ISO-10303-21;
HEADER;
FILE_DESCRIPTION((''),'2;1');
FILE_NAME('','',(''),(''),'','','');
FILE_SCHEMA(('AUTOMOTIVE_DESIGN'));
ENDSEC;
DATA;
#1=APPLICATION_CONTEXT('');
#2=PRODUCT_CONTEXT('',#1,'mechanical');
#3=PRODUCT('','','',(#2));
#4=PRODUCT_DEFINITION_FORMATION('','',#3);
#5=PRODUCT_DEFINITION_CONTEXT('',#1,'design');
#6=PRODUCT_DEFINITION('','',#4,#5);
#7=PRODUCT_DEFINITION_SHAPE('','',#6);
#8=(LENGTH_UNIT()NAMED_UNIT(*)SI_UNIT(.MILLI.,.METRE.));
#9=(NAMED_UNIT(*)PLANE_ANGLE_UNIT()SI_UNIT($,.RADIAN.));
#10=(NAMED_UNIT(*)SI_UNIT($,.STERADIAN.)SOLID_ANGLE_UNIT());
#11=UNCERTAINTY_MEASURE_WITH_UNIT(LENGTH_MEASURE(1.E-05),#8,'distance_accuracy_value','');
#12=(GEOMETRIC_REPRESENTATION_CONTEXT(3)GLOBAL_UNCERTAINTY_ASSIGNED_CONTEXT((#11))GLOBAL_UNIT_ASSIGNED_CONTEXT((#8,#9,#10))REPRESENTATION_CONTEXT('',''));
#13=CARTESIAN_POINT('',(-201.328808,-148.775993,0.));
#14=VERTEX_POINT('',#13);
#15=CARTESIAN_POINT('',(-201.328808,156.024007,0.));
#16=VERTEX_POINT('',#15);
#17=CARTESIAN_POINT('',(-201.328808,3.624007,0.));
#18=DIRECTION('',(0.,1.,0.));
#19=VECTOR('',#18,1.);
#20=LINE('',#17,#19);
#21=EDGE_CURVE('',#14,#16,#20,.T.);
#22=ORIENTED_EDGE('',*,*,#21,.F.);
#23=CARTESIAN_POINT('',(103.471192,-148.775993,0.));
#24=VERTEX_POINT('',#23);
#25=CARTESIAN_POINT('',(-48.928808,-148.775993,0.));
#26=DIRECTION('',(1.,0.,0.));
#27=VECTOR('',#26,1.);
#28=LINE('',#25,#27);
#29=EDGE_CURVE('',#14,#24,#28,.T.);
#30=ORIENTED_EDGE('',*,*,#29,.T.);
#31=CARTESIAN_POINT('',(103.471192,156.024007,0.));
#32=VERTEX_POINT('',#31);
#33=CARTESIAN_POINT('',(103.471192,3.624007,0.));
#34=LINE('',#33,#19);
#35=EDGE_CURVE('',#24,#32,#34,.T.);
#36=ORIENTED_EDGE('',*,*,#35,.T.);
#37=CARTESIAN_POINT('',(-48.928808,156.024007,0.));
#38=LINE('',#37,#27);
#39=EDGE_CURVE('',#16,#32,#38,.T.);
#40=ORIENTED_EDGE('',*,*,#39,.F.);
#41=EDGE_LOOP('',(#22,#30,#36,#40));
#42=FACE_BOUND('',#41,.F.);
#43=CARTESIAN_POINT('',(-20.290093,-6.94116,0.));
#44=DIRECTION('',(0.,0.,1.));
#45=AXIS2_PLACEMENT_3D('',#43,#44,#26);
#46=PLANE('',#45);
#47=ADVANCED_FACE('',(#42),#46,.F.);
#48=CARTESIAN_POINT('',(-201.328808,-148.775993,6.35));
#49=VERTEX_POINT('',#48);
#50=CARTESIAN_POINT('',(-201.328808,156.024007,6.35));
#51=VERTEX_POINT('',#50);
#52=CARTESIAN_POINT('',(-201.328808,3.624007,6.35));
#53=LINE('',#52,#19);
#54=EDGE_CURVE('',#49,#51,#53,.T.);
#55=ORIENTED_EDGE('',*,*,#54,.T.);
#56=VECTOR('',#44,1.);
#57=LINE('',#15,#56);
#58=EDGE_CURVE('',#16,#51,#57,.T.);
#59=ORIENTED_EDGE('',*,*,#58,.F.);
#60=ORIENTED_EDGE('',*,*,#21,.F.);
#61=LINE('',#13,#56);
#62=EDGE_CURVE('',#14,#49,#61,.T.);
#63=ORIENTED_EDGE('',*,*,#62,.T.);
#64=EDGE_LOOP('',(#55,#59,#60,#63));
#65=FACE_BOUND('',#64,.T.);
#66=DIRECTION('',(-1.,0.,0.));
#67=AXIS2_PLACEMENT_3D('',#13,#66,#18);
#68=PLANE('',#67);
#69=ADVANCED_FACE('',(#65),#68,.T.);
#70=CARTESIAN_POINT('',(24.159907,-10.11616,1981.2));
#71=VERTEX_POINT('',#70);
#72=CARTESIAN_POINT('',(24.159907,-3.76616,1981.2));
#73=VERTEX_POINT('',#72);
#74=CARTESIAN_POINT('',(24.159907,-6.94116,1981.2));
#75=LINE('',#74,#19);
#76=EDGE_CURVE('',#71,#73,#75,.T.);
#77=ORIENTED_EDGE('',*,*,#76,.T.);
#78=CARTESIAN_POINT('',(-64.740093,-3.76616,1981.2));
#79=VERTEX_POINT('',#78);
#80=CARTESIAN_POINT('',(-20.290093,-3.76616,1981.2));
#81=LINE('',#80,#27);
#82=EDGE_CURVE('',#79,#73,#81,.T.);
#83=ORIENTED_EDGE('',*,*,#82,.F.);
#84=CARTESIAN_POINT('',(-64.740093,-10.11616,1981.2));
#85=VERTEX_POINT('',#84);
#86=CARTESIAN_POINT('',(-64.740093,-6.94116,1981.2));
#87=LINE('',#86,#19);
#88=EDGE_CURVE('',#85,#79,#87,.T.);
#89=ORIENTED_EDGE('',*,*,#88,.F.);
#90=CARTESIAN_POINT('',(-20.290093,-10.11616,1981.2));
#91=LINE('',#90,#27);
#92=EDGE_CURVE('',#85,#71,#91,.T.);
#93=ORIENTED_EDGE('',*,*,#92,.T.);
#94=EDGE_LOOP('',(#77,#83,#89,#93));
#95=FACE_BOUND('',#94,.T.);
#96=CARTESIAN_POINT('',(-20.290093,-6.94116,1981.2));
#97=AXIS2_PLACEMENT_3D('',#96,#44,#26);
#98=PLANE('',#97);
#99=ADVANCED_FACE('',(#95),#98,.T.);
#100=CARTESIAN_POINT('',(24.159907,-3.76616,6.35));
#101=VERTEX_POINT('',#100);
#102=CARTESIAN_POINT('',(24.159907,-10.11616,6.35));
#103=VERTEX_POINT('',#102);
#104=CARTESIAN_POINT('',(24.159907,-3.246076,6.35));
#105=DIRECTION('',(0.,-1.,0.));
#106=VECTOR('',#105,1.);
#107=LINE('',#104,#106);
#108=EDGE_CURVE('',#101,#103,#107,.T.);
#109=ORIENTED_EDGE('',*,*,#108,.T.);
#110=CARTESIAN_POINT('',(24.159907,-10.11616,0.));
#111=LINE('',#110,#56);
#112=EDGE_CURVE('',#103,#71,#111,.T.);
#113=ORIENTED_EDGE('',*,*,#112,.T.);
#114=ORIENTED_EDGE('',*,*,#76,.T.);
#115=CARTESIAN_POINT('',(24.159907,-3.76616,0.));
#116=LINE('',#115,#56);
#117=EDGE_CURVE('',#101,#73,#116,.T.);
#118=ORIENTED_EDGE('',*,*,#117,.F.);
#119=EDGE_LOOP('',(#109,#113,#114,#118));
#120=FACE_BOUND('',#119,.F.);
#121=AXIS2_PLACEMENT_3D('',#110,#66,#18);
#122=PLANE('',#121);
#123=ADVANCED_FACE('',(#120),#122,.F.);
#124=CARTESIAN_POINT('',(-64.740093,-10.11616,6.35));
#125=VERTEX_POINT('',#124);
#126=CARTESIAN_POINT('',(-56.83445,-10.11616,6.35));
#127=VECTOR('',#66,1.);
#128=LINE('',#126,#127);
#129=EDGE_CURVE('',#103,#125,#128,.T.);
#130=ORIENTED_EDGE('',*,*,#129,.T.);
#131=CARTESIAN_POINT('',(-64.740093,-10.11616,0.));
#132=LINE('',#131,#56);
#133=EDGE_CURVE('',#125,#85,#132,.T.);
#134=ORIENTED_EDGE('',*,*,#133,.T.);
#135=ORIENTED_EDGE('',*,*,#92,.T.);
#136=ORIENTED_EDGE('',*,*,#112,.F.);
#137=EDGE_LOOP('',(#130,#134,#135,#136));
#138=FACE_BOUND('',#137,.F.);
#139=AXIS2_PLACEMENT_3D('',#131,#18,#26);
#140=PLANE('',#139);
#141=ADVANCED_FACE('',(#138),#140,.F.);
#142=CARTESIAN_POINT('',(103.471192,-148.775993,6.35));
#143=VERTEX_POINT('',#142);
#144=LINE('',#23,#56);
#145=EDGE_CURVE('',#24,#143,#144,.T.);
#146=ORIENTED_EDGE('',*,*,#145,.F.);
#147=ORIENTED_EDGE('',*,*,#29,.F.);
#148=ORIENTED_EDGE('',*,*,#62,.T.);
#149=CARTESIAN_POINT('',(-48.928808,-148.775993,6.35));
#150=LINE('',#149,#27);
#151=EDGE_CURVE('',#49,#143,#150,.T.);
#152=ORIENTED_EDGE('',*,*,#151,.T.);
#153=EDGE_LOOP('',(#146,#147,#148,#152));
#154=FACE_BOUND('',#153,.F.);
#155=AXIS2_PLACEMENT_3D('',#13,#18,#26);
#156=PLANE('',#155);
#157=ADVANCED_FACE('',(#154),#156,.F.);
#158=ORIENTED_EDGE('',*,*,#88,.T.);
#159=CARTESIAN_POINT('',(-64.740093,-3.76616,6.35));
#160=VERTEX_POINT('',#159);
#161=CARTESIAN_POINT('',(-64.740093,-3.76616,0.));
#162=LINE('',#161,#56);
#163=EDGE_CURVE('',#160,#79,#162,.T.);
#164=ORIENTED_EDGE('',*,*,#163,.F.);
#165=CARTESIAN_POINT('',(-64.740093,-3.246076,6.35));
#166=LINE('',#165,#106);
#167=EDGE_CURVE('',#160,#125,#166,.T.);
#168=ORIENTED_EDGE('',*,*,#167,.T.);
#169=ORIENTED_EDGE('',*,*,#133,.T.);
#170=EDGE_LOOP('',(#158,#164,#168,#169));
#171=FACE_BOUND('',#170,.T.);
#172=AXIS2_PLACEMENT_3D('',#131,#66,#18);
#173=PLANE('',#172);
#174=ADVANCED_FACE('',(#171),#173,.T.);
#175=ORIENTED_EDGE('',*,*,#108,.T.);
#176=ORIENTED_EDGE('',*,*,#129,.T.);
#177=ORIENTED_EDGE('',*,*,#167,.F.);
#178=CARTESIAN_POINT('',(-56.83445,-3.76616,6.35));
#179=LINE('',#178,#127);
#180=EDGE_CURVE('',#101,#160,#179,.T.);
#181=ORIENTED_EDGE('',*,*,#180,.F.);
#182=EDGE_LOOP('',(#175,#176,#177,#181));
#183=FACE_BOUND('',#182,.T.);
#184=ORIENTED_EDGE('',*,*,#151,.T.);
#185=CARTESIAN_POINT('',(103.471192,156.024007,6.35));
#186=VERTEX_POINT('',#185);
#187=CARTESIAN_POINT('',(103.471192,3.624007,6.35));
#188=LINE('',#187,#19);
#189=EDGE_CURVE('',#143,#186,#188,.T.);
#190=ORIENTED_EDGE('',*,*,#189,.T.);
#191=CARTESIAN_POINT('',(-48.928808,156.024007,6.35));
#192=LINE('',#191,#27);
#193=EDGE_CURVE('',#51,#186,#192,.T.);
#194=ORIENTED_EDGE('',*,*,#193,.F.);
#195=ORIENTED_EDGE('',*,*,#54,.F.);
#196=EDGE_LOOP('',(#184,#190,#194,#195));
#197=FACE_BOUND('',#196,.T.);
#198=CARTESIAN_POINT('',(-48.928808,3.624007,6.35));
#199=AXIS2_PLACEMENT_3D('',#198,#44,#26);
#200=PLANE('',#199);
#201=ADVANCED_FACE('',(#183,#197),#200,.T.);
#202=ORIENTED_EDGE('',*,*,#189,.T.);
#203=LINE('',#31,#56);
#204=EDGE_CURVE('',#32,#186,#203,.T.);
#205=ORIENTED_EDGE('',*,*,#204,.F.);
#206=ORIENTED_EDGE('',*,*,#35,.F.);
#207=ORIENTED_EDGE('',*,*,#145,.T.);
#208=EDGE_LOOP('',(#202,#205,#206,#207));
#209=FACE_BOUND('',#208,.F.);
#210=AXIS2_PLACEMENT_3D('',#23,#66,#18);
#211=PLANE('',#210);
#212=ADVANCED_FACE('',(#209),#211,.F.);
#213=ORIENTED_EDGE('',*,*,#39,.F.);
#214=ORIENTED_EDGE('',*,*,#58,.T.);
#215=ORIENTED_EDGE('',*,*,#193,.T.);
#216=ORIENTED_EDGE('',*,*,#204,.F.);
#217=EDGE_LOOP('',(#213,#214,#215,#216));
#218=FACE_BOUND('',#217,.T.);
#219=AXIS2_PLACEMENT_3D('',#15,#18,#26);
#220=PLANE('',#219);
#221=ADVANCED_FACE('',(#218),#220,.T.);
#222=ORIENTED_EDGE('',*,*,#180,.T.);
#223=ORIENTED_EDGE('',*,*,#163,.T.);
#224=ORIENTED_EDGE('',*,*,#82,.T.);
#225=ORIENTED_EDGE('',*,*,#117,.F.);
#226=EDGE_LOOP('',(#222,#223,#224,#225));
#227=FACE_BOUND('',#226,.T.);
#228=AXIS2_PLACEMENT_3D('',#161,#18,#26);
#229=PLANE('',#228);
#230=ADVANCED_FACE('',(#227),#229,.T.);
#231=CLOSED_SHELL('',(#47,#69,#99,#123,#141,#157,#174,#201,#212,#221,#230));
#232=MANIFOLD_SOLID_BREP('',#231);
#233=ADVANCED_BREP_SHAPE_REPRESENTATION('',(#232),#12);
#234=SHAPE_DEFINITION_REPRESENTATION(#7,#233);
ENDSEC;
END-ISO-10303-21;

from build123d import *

# Parameters (mm, degrees)
F0_W     = 304.8
F0_H     = 304.8
F1_DEPTH = 6.35
F2_W     = 88.9
F2_H     = 6.35
F3_DEPTH = 1981.2


# Not quite as in the source:
# - a length typed as a fraction of an inch, garbled in the dataset ("3 / 203.2 mm" for 3/8 in), is restored


with BuildPart() as f1:
    # F0 (on Top) → F1 (new body)
    with BuildSketch(Plane.XY):
        with Locations((-48.9288084209, 3.6240073187)):
            Rectangle(F0_W, F0_H)
    extrude(amount=F1_DEPTH)

    # F2 (on Top) → F3 (join)
    with BuildSketch(Plane.XY):
        with Locations((-20.2900925651, -6.9411601371)):
            Rectangle(F2_W, F2_H)
    extrude(amount=F3_DEPTH)


solid = f1.part
